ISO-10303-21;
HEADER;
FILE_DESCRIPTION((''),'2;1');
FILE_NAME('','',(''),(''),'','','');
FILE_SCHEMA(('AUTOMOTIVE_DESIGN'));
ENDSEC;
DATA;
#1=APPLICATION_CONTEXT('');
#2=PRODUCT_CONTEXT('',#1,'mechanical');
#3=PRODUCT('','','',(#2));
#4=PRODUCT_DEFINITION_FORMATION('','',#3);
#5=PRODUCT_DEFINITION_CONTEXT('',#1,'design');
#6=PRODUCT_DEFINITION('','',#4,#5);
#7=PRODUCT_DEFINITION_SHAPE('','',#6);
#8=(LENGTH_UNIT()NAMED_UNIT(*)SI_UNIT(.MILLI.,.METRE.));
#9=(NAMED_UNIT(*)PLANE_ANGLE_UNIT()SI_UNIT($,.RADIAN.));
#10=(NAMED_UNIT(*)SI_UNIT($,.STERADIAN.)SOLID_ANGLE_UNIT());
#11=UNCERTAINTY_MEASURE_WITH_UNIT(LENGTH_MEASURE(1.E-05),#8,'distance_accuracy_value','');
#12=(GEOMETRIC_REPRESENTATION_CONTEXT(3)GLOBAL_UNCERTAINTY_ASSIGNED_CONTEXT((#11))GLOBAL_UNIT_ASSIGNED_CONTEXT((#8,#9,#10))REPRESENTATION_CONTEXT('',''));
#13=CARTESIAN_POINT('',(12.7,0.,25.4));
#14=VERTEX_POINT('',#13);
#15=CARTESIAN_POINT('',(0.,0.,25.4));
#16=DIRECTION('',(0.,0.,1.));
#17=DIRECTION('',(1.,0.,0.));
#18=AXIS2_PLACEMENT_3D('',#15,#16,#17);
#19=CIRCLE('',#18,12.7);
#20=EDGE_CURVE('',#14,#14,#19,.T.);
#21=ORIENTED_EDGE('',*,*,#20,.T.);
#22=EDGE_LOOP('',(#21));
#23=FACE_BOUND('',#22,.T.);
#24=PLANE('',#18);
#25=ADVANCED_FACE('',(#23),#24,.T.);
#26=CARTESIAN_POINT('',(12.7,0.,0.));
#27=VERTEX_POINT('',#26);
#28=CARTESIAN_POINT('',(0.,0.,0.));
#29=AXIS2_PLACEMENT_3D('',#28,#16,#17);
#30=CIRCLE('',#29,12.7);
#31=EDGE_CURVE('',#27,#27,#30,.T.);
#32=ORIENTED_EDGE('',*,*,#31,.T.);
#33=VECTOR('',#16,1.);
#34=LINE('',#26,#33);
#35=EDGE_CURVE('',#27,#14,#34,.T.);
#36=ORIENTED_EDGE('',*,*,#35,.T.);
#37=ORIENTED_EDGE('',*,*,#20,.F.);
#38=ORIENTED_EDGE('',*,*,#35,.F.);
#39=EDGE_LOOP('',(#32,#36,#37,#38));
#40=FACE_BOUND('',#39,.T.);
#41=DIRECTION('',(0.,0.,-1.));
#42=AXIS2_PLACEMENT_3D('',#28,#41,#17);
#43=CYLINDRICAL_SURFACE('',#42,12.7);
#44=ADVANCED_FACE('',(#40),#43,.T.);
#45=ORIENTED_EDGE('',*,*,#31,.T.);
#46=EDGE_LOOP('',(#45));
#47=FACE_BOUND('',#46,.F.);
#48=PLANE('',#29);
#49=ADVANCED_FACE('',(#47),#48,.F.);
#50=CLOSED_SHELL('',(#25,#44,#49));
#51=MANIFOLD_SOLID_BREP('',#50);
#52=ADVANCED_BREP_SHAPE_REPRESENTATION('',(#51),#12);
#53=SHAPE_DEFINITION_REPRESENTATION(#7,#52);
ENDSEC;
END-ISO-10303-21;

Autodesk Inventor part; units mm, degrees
ref_plane "YZ Plane" through (0, 0, 0) normal (1, 0, 0) x (0, 1, 0)
ref_plane "XZ Plane" through (0, 0, 0) normal (0, 1, 0) x (-1, 0, 0)
ref_plane "XY Plane" through (0, 0, 0) normal (0, 0, 1) x (1, 0, 0)
sketch "Sketch1" plane through (0, 0, 0) normal (0, 0, 1) x (1, 0, 0)
  circle A0 centre (0, 0) radius 12.7
extrude "Extrusion1" add sketch "Sketch1" along normal blind 25.4
properties part number "Cylinder, Center Constrained" material "Steel, MS"
